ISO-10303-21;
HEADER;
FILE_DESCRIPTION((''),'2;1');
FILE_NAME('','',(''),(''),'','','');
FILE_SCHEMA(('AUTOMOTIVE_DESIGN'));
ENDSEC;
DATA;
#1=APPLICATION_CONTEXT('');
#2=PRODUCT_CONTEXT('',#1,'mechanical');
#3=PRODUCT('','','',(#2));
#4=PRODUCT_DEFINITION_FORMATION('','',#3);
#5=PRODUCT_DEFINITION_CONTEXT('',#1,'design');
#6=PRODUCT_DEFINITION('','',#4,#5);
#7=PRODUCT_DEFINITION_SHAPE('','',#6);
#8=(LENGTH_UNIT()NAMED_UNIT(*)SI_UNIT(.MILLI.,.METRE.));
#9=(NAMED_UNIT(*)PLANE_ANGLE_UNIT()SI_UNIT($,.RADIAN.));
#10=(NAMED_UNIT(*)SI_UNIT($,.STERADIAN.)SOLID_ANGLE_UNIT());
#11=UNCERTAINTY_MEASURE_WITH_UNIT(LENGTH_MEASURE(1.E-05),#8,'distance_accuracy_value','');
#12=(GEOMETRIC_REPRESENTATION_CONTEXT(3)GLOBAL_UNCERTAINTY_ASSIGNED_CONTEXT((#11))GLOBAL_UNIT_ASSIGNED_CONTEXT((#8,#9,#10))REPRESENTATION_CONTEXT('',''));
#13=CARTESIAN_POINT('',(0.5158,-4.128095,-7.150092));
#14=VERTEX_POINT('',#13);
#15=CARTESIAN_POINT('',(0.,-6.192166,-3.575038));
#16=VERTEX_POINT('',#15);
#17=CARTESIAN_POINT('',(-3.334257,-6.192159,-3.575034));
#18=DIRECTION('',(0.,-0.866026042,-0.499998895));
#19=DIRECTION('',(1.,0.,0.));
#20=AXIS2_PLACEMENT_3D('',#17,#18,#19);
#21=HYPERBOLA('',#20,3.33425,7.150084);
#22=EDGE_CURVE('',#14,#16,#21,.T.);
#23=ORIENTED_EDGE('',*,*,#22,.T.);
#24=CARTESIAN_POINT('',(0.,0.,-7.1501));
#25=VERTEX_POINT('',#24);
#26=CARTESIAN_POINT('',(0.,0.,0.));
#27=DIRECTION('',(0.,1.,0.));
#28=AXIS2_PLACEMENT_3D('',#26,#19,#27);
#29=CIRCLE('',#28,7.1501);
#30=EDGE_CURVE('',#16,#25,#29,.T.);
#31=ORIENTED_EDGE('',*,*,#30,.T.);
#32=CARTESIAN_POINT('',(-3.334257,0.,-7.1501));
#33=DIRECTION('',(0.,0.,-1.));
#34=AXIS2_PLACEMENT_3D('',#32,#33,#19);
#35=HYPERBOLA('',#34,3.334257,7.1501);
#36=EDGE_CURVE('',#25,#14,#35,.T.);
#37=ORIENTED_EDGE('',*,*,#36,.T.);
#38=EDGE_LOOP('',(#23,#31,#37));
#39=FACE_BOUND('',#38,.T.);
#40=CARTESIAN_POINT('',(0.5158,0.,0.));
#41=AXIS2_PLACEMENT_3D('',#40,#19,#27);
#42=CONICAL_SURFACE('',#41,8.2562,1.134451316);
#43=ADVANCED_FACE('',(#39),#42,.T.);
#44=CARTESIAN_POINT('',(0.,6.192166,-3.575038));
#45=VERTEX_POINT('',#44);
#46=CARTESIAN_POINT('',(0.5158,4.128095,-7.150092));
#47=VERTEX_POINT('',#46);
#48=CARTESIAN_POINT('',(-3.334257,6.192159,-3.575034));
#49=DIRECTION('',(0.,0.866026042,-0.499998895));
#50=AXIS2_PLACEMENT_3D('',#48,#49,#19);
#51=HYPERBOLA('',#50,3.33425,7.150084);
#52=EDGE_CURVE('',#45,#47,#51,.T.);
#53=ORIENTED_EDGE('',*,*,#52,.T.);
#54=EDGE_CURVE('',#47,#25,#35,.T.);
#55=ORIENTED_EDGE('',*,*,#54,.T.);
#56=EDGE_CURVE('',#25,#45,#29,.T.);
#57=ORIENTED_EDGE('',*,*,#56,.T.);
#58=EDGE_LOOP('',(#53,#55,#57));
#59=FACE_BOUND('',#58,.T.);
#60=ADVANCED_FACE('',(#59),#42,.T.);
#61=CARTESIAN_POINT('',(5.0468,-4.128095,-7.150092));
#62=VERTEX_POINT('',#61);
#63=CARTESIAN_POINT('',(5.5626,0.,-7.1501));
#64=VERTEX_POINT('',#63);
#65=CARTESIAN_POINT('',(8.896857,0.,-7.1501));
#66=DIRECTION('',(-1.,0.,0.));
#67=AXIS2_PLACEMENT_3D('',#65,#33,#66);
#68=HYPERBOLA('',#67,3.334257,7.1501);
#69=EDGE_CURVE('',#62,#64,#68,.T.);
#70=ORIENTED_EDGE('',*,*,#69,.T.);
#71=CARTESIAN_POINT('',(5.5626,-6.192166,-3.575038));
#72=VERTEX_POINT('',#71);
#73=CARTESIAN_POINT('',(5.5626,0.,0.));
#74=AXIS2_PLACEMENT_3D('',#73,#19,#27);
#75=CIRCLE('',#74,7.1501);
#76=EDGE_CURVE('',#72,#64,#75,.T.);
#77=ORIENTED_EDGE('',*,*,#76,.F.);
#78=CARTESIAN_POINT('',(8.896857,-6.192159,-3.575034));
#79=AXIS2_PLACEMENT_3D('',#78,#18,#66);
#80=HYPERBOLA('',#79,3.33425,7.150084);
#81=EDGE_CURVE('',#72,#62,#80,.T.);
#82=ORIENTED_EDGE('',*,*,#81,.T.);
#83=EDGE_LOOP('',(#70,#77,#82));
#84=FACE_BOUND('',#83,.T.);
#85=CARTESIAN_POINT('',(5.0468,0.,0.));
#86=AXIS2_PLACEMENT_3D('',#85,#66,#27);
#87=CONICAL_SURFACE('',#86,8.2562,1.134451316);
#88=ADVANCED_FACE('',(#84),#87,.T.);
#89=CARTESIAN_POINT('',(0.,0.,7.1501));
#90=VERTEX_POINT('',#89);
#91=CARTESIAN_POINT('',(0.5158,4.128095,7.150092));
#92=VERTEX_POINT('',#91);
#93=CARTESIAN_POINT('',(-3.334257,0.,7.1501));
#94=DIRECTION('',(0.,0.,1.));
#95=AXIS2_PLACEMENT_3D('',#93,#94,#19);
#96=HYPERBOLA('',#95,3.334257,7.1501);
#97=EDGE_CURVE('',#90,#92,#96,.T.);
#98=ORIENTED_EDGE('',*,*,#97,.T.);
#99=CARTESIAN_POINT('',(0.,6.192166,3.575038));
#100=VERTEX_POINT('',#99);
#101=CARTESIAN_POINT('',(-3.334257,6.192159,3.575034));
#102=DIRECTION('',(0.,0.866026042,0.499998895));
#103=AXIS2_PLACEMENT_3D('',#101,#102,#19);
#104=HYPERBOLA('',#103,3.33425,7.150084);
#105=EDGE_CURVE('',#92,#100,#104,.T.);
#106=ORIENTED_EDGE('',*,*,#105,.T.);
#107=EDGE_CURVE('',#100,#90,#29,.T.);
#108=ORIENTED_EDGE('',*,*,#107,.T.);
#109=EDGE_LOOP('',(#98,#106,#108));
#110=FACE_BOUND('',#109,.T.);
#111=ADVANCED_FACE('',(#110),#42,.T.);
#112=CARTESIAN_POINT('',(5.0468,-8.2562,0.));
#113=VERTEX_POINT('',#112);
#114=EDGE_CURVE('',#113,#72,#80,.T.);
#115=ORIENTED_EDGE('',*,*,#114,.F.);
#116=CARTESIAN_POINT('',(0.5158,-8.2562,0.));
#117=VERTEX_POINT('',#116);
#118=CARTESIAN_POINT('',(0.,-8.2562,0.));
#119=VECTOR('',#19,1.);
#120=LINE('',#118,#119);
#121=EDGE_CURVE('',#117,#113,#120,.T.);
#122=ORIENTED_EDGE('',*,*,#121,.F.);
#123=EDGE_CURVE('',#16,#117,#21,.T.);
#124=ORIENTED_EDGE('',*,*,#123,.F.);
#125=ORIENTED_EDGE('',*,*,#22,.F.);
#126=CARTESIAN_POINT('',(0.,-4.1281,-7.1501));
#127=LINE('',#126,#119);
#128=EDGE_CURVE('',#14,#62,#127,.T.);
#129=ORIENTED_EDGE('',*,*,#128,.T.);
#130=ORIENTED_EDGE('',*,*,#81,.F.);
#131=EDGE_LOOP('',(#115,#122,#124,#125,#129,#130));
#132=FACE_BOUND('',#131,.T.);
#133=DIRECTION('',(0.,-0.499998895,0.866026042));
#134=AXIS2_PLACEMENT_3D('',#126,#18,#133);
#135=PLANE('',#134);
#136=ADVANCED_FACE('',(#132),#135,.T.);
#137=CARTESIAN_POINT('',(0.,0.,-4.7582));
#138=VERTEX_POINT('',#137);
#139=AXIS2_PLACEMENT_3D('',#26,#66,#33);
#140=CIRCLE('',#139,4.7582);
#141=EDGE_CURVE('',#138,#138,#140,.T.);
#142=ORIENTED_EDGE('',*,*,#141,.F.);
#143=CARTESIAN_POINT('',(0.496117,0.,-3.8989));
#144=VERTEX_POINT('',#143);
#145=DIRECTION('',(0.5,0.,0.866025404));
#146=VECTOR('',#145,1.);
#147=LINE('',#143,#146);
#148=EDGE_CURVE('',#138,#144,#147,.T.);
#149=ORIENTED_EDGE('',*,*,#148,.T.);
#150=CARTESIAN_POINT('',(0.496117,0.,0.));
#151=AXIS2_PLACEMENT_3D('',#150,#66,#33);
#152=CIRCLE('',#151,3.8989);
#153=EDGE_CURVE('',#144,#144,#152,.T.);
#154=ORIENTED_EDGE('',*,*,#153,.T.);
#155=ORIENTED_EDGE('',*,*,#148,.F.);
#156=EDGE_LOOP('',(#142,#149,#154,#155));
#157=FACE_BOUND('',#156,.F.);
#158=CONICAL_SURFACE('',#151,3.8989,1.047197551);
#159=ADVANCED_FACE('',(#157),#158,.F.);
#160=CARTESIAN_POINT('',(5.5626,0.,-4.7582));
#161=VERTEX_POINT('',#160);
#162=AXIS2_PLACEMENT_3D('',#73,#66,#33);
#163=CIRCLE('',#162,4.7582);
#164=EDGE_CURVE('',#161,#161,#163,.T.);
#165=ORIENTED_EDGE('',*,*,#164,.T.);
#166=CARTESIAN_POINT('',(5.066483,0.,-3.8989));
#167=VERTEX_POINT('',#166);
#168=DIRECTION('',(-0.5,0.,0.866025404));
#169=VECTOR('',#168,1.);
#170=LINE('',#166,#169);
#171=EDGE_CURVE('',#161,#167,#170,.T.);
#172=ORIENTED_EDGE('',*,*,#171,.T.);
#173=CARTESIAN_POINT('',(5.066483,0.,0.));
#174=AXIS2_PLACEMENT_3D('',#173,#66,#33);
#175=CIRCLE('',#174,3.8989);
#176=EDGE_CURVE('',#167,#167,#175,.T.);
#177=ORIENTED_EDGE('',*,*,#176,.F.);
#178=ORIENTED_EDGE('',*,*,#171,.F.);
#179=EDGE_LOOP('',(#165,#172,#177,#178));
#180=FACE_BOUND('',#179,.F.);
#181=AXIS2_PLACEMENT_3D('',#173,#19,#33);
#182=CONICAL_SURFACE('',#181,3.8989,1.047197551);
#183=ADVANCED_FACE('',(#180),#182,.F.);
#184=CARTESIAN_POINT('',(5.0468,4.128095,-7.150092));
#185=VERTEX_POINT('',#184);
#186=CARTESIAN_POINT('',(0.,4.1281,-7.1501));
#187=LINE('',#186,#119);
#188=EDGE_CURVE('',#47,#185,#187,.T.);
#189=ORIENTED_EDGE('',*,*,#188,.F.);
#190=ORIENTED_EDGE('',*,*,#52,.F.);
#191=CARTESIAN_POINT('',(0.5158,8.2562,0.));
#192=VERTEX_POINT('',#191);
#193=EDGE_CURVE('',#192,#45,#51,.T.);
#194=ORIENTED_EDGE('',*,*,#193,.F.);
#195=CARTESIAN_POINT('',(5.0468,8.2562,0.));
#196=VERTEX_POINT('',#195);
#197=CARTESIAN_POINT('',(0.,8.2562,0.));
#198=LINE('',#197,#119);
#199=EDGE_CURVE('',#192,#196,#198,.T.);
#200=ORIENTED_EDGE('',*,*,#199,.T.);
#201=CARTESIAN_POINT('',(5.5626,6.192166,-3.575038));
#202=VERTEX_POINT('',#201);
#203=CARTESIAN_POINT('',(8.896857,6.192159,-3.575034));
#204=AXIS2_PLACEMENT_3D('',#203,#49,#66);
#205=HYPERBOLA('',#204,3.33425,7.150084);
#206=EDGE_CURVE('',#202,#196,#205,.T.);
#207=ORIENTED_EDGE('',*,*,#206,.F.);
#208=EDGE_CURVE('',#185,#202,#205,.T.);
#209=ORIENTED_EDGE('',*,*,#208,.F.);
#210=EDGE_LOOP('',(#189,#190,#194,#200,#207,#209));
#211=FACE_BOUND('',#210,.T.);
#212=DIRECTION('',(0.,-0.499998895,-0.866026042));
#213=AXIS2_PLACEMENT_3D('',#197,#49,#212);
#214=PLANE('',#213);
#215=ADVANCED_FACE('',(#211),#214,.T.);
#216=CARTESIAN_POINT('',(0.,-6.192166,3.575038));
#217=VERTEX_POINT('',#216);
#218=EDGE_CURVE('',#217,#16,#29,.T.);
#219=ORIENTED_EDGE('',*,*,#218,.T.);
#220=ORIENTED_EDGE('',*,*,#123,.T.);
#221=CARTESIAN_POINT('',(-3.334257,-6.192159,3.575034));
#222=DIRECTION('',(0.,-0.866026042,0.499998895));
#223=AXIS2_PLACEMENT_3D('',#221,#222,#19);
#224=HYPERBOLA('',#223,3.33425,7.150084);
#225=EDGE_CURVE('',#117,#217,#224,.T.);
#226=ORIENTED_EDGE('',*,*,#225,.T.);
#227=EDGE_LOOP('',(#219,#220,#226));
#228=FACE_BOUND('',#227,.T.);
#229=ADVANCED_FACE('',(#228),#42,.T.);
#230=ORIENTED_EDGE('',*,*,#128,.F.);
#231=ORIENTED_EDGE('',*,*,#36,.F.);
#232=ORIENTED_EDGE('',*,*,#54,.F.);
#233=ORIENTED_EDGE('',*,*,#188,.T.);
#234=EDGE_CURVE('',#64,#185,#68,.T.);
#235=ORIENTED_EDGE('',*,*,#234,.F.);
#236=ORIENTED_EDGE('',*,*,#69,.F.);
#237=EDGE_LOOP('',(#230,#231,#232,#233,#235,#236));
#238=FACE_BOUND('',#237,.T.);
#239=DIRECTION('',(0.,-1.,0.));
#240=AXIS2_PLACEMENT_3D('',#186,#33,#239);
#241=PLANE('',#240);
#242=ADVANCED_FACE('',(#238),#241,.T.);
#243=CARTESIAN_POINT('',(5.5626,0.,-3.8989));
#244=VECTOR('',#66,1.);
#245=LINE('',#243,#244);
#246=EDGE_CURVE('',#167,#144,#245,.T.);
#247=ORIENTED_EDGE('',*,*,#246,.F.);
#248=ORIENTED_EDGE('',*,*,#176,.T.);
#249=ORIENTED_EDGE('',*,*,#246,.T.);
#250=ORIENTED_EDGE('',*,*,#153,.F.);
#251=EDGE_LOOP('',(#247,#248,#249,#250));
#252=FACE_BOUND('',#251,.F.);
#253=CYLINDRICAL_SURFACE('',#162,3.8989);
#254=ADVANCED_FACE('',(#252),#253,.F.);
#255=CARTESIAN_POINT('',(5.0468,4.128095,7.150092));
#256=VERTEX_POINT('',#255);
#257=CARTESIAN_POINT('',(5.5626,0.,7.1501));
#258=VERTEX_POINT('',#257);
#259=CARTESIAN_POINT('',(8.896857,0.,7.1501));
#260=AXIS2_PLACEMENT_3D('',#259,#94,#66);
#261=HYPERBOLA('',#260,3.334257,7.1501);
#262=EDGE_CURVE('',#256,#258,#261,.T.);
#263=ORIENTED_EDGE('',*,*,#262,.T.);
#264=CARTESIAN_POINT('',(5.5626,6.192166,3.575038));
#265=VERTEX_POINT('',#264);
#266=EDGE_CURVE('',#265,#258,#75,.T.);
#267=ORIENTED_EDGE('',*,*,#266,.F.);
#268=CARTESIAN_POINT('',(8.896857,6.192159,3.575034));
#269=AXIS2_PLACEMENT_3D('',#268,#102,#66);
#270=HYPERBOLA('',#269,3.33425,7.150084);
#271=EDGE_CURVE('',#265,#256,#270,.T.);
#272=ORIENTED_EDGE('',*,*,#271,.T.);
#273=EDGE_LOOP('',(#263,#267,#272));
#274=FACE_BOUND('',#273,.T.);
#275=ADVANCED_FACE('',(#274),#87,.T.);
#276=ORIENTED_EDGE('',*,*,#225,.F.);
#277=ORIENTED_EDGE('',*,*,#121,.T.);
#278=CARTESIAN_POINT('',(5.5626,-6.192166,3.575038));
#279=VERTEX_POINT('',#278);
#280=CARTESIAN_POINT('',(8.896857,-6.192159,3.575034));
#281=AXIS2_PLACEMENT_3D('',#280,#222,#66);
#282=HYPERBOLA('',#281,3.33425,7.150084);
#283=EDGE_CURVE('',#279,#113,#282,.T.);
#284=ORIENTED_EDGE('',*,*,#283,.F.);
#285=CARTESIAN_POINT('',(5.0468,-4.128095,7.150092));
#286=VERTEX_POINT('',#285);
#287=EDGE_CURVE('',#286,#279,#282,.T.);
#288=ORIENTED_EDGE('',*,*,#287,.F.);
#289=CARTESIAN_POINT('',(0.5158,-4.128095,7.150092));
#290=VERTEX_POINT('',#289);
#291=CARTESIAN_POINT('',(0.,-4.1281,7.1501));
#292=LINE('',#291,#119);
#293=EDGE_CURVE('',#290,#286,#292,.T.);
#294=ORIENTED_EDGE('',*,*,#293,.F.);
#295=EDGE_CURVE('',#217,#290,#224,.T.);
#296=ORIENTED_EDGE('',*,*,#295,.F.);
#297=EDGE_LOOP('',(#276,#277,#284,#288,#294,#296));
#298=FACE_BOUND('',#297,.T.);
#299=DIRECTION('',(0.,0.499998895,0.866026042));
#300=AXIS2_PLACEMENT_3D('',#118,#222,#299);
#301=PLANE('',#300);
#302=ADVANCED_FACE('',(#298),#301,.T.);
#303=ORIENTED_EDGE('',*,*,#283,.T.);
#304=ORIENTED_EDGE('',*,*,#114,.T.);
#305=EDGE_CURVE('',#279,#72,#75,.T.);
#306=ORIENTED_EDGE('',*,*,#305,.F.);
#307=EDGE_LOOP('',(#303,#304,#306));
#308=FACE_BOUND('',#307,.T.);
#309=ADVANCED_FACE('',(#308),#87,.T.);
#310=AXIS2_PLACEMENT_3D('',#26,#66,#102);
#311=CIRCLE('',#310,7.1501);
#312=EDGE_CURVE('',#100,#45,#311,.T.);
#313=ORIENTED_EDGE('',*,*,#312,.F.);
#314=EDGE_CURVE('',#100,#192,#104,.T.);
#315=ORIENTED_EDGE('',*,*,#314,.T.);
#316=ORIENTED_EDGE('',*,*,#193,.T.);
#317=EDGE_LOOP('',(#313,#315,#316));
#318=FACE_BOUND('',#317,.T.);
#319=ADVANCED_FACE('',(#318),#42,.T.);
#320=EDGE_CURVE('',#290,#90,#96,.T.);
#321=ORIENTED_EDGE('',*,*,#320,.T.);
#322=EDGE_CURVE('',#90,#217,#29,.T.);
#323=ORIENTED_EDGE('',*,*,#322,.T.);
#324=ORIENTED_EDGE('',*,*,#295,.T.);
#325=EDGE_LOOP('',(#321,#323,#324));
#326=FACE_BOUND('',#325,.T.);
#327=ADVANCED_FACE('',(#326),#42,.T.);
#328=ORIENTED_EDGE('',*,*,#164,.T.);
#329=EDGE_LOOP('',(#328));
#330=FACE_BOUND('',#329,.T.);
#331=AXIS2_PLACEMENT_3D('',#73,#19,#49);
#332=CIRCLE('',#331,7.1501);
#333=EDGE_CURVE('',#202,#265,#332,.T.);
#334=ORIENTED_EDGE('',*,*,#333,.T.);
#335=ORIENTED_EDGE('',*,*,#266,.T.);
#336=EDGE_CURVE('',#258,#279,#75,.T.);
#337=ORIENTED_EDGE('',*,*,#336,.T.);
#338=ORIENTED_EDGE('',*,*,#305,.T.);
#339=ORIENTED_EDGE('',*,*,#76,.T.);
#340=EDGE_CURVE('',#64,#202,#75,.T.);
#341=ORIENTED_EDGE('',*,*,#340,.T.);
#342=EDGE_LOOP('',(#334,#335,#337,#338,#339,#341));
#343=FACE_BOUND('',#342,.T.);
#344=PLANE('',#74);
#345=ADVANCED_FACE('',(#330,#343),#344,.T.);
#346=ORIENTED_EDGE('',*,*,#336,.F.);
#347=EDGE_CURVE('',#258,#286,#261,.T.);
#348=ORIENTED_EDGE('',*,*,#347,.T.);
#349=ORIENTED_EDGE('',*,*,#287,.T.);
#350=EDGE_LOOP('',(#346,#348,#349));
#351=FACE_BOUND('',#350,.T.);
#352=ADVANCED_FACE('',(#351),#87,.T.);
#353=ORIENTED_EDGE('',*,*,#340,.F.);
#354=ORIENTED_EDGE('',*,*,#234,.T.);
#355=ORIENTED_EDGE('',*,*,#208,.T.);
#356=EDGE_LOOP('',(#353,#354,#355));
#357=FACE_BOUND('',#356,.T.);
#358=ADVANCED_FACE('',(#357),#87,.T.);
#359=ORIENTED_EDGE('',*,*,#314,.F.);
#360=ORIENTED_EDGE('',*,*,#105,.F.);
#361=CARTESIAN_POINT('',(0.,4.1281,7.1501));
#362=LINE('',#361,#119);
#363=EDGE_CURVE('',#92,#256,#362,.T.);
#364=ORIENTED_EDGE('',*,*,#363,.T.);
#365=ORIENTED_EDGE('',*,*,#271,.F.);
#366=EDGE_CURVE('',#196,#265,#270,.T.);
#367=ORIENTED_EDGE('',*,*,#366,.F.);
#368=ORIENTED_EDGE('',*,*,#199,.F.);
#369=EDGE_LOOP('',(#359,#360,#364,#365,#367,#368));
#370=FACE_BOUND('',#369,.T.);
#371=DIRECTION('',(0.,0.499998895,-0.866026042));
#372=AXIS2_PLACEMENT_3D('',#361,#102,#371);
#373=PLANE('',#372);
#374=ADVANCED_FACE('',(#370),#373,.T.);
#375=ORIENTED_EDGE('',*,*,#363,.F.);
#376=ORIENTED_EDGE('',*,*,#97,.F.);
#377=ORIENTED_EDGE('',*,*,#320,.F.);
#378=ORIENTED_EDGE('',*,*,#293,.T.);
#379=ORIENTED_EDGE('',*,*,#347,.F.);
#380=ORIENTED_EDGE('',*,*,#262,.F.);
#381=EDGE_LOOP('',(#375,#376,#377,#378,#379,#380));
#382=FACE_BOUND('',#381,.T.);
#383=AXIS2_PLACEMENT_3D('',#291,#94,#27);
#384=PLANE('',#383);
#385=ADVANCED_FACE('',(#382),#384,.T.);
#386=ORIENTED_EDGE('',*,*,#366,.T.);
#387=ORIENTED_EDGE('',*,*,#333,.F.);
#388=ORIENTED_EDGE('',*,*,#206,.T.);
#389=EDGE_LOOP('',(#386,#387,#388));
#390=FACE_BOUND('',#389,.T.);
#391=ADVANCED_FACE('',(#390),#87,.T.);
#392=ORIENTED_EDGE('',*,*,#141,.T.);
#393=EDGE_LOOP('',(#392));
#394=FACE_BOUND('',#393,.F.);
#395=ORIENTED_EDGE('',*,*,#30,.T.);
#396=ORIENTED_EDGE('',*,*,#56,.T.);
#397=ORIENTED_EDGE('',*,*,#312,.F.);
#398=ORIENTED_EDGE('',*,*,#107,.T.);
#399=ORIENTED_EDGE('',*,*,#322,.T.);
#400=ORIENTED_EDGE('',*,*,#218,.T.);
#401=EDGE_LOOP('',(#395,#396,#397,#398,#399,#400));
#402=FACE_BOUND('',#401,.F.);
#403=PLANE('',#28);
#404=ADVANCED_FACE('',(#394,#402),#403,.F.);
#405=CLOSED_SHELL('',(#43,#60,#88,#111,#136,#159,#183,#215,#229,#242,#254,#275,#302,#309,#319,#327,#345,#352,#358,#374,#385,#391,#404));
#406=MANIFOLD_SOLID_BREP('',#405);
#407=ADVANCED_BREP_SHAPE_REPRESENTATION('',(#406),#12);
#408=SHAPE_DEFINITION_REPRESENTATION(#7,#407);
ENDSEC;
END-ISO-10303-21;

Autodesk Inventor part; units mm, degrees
ref_plane "YZ Plane" through (0, 0, 0) normal (1, 0, 0) x (0, 1, 0)
ref_plane "XZ Plane" through (0, 0, 0) normal (0, 1, 0) x (-1, 0, 0)
sketch "Sketch1" plane through (0, 0, 0) normal (1, 0, 0) x (0, 1, 0)
  line L0 (-8.2562, 0) -> (-4.1281, 7.1501)
  line L1 (-4.1281, 7.1501) -> (4.1281, 7.1501)
  line L2 (4.1281, 7.1501) -> (8.2562, 0)
  line L3 (8.2562, 0) -> (4.1281, -7.1501)
  line L4 (4.1281, -7.1501) -> (-4.1281, -7.1501)
  line L5 (-4.1281, -7.1501) -> (-8.2562, 0)
  point P0 (0, 0)
  point P1 (0, 0)
  dimension "d0" = 16.5125
extrude "Body" add sketch "Sketch1" along normal blind 5.5626
sketch "Sketch2" plane through (0, 0, 0) normal (0, 0, 1) x (1, 0, 0)
  line L0 (0, 4.1281) -> (0, 8.2562) projected
  line L1 (0, 8.2562) -> (5.5626, 8.2562) projected
  line L2 (5.5626, 4.1281) -> (5.5626, 8.2562) projected
  line L3 (-1.1125, 0) -> (6.6751, 0) projected
  line L4 (0.5158, 8.2562) -> (0, 7.1501)
  line L5 (5.0468, 8.2562) -> (5.5626, 7.1501)
  dimension "d3" = 25
  dimension "d4" = 25
  dimension "d5" = 14.3002
  dimension "d6" = 14.3002
revolve "Chamfer1" cut sketch "Sketch2" angle 360 about axis through (-10, 0, 0) along (1, 0, 0)
sketch "Sketch3" plane through (5.5626, 0, 0) normal (1, 0, 0) x (0, 0, -1)
  arc A0 (-3.575, -6.1922) -> (3.575, -6.1922) centre (0, 0) ccw projected
hole "Thread" at (5.5626, 0, 0) direction (-1, 0, 0) diameter 7.7978 end through all thread size "3/8-16 UNC" class "2B" standard "ANSI Unified Screw Threads"
chamfer "Chamfer2" distance 0.8593 angle 30 1 edges at (5.5626, 0, 3.8989) measured on face at (5.5626, -6.0308, 0.1567)
chamfer "Chamfer3" distance 0.8593 angle 30 1 edges at (0, 0, 3.8989) measured on face at (0, -6.0308, 0.1567)
ref_plane "Work Plane1" through (-16.9785, 0, 0) normal (0, -0.8660254, -0.5) x (1, 0, 0)
equation "\"d0\" = 1.1547 * SW"
equation "\"d1\" = KOH"
equation "\"d3\" = ANG1"
equation "\"d4\" = ANG2"
equation "\"d5\" = SW0"
equation "\"d6\" = SW01"
equation "\"d8\" = -0.5 * GD1 + 0.5 * NND"
equation "\"d40\" = -0.5 * GD1 + 0.5 * NND"
equation "\"d10\" = -0.5 * GD1 + 0.5 * NND"
equation "\"d41\" = -0.5 * GD1 + 0.5 * NND"
equation "\"ANG1\" = 25deg"
equation "\"ANG2\" = 25deg"
equation "\"NND\" = 9.525"
equation "\"KOH\" = 5.5626"
equation "\"SW\" = 14.3002"
equation "\"SW0\" = SW"
equation "\"SW01\" = SW"
equation "\"THREADDIA\" = 9.525"
equation "\"TOA\" = 30deg"
equation "\"E0\" = 1.155 * SW"
equation "\"GD1\" = 7.806481"
properties part number "ANSI B18.2.2 - 3/8 - 16, HJNI" material "Steel, Mild"
